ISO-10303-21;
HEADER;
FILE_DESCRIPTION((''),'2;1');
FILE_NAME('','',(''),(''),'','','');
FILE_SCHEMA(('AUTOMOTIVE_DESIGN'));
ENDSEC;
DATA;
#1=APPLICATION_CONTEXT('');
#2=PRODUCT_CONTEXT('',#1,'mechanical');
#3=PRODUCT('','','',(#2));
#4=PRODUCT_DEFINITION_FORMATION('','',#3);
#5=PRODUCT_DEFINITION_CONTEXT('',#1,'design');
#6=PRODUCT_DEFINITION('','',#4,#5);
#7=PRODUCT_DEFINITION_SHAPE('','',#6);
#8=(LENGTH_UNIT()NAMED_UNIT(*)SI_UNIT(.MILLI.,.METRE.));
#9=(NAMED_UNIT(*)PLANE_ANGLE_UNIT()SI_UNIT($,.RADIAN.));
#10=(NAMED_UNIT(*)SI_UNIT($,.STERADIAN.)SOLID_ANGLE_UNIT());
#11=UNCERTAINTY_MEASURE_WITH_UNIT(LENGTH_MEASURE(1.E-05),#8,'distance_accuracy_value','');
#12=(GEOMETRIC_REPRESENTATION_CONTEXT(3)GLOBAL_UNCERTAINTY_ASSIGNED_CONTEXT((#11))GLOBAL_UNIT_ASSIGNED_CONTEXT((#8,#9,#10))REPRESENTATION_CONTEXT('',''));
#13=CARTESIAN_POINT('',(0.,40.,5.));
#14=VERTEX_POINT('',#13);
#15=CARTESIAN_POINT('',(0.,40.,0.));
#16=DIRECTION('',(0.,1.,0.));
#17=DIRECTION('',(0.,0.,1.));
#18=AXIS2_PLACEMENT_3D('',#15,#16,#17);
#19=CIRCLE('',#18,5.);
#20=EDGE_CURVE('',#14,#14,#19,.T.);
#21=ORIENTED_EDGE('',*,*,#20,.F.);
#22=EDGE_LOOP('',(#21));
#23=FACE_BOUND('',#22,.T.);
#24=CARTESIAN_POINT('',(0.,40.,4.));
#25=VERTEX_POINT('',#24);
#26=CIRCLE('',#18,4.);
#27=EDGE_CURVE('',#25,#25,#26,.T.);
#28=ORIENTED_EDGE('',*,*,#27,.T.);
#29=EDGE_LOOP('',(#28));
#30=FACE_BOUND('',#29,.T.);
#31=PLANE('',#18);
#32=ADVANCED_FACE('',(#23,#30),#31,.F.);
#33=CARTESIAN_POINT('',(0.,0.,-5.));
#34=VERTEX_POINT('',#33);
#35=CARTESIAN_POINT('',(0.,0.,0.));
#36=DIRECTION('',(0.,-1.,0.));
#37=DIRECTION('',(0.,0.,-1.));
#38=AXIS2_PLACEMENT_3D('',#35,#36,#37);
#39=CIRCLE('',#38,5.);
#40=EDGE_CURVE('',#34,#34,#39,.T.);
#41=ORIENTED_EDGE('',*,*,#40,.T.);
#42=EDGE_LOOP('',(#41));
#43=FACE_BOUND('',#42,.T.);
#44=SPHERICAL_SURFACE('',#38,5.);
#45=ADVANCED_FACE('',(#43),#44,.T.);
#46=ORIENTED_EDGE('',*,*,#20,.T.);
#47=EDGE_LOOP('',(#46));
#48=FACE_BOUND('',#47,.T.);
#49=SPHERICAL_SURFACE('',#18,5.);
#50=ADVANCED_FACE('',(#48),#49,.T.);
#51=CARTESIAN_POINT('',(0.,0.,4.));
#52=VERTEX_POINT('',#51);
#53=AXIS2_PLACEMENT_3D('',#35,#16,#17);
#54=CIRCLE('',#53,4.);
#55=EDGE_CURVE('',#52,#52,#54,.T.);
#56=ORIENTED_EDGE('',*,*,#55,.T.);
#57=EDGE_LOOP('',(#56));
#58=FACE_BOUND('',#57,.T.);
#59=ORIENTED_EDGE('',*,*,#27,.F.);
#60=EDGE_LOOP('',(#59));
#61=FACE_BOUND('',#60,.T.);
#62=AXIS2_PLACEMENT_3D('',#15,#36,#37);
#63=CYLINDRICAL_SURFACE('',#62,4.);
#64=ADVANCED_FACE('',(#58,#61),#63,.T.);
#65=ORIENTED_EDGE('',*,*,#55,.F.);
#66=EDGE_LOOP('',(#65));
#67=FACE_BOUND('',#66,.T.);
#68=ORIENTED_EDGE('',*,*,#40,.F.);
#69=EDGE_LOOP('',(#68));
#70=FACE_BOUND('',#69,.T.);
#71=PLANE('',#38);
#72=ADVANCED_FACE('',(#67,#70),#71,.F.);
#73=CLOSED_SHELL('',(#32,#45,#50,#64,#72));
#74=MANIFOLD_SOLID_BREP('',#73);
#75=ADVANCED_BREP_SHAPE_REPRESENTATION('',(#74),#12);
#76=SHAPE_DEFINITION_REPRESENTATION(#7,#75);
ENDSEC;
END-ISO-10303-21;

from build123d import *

# Parameters (mm, degrees)
SZKIC1_R                    = 4
DODANIE_WYCI_GNI_CIE1_DEPTH = 40
SZKIC2_R                    = 5
DODANIE_WYCI_GNI_CIE2_DEPTH = 5
ZAOKR_GLENIE1_R             = 5
DODANIE_WYCI_GNI_CIE3_START = 5
SZKIC3_R                    = 5
DODANIE_WYCI_GNI_CIE3_DEPTH = 5
ZAOKR_GLENIE2_R             = 5


with BuildPart() as part:
    # Szkic1 → Dodanie-wyciągnięcie1 (new body)
    with BuildSketch(Plane(origin=(0, 0, 0), x_dir=(1, 0, 0), z_dir=(0, 1, 0))):
        with Locations(Location((0, 0, 0), (0, 0, 270))):
            Circle(SZKIC1_R)
    extrude(amount=DODANIE_WYCI_GNI_CIE1_DEPTH)

    # Szkic2 → Dodanie-wyciągnięcie2 (add)
    with BuildSketch(Plane(origin=(0, 40, 0), x_dir=(1, 0, 0), z_dir=(0, 1, 0))):
        with Locations(Location((0, 0, 0), (0, 0, 270))):
            Circle(SZKIC2_R)
    extrude(amount=DODANIE_WYCI_GNI_CIE2_DEPTH)

    # Zaokrąglenie1
    zaokr_glenie1_edges = [part.edges().sort_by_distance(p)[0] for p in [
        (0, 45, -5),
    ]]
    fillet(zaokr_glenie1_edges, radius=ZAOKR_GLENIE1_R - 0.0001)  # a hair under: the kernel refuses the full size

    # Szkic3 → Dodanie-wyciągnięcie3 (add)
    with BuildSketch(Plane.XZ.offset(DODANIE_WYCI_GNI_CIE3_START)):
        with Locations(Location((0, 0, 0), (0, 0, 270))):
            Circle(SZKIC3_R)
    extrude(amount=-DODANIE_WYCI_GNI_CIE3_DEPTH)

    # Zaokrąglenie2
    zaokr_glenie2_edges = [part.edges().sort_by_distance(p)[0] for p in [
        (0, -5, 5),
    ]]
    fillet(zaokr_glenie2_edges, radius=ZAOKR_GLENIE2_R - 0.0001)  # a hair under: the kernel refuses the full size


solid = part.part
